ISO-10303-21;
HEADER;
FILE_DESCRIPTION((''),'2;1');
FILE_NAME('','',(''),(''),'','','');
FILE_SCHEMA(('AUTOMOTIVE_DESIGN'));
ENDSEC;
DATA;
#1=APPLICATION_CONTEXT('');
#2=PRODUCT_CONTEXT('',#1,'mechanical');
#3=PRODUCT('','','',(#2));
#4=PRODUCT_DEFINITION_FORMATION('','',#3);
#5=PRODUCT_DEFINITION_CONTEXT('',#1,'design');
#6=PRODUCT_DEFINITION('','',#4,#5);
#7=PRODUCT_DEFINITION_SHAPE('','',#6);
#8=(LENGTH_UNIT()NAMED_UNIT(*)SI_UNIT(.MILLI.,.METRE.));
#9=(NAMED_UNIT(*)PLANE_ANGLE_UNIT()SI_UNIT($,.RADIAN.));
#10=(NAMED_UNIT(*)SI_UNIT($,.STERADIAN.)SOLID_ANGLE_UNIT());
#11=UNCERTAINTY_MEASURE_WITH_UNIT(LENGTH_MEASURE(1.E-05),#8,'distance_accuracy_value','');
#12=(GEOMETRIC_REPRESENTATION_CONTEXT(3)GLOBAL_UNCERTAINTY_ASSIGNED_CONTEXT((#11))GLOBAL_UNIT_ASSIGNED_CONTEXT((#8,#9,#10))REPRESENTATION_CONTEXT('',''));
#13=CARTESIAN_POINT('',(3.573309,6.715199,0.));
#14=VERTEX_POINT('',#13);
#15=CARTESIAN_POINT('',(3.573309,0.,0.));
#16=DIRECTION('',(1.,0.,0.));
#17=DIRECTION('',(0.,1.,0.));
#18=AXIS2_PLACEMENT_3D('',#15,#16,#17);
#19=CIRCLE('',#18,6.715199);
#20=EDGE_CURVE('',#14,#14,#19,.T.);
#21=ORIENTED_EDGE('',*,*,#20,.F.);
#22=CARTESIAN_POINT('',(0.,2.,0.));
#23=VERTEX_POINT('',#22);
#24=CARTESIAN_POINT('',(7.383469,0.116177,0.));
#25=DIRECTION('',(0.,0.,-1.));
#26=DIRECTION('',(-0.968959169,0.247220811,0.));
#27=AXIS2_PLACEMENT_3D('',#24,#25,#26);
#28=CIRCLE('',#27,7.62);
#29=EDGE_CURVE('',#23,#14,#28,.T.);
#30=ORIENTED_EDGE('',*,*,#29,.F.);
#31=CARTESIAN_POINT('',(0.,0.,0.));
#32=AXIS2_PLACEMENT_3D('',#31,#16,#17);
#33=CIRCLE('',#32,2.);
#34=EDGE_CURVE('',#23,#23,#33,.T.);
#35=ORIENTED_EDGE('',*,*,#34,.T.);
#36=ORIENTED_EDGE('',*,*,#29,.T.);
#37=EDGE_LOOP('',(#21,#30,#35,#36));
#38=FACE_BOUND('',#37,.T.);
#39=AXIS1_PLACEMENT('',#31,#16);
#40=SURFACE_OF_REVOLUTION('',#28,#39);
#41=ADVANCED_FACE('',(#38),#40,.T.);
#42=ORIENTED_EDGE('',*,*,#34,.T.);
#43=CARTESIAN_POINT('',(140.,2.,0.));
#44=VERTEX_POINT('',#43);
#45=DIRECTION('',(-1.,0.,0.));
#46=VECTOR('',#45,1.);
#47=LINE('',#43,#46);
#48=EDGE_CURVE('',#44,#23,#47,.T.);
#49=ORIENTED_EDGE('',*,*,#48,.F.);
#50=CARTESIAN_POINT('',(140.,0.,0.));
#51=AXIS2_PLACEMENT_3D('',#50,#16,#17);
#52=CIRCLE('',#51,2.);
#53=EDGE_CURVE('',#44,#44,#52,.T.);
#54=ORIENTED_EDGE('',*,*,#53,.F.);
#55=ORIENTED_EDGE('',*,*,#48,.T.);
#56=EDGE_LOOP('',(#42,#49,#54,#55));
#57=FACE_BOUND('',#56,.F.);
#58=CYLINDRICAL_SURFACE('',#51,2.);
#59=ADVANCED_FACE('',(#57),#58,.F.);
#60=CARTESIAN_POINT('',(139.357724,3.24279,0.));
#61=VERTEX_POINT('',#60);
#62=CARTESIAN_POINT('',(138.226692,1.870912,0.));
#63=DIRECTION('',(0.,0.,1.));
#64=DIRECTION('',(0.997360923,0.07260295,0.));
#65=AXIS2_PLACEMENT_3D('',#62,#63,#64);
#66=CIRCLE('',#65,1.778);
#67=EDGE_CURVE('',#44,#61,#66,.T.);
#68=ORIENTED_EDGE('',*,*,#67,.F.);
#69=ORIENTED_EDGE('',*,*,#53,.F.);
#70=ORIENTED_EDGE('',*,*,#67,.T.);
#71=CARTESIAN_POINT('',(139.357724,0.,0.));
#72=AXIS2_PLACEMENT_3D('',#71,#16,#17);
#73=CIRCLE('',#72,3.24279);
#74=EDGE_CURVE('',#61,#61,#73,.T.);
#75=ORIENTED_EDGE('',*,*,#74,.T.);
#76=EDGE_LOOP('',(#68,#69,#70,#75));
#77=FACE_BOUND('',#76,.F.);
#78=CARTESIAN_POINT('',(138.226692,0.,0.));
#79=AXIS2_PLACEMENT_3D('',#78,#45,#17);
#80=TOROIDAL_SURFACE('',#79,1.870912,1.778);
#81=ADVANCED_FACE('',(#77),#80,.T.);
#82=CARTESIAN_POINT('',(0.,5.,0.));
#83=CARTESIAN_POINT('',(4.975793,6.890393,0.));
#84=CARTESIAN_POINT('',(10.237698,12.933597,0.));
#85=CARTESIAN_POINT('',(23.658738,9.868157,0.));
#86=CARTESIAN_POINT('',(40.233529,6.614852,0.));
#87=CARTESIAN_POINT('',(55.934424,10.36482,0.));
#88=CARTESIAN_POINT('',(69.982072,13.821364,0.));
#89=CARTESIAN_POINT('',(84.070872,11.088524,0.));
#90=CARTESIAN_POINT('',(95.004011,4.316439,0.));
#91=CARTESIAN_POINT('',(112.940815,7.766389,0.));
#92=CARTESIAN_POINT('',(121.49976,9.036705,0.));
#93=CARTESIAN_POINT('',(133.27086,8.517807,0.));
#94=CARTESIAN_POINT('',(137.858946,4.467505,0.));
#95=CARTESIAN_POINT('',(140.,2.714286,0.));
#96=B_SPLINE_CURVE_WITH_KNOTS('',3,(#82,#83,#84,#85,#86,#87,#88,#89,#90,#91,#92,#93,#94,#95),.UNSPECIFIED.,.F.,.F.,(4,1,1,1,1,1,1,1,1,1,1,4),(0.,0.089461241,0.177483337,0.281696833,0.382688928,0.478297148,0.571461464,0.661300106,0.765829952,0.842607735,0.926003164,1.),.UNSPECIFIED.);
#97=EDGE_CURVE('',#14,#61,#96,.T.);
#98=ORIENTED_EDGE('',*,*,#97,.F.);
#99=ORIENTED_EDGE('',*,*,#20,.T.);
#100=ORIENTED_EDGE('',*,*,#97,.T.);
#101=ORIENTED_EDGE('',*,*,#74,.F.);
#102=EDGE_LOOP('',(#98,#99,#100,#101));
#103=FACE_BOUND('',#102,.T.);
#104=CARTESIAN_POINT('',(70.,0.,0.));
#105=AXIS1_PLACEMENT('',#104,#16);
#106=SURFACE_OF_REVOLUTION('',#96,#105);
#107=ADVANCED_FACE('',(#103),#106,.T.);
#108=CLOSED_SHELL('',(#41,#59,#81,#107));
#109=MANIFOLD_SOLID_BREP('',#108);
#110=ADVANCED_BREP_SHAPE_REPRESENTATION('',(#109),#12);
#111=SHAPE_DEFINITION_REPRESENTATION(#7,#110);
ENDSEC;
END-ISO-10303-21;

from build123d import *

# Parameters (mm, degrees)
F2_R     = 2
F3_DEPTH = 140.0010001


# Not quite as in the source:
# - a fillet or chamfer that OpenCascade refuses, or shapes differently, is made with other operations: its cross-section is extruded or revolved along the edge and cut away or added


with BuildPart() as f1:
    # F0 (on Top) → F1 (revolve)
    with BuildSketch(Plane.XY):
        with BuildLine():
            Line((0, 5), (0, 0))
            Line((0, 0), (140, 0))
            Line((140, 0), (140, 2.7142855423))
            add(Edge.make_bspline(
                [(0, 5), (4.9757928307, 6.8903925487), (10.237697674, 12.9335968557), (23.6587376595, 9.8681565944), (40.2335290349, 6.6148517626), (55.9344236845, 10.3648201497), (69.9820716554, 13.8213637044), (84.0708721521, 11.08852401), (95.0040113038, 4.316439134), (112.9408147187, 7.7663893472), (121.4997603993, 9.0367049085), (133.2708596303, 8.51780716), (137.8589455035, 4.4675047231), (140, 2.7142855423)],
                knots=[0, 0, 0, 0, 0.0894612415, 0.1774833365, 0.281696833, 0.3826889283, 0.4782971476, 0.5714614637, 0.6613001063, 0.7658299525, 0.8426077345, 0.9260031641, 1, 1, 1, 1], degree=3))
        make_face()
    revolve(axis=Axis((70, 0, 0), (1, 0, 0)))

    # F2 (on face) → F3 (cut, through all)
    with BuildSketch(Plane.YZ.offset(140)):
        Circle(F2_R)
    extrude(amount=-F3_DEPTH, mode=Mode.SUBTRACT)

    # F4: fillet of radius 7.62 on 1 edges, made by hand

    # F4_s1 → F4_t2 (revolve, cut)
    with BuildSketch(Plane.XY):
        with BuildLine():
            ThreePointArc((0, 2), (1.3103638059, 4.7185458275), (3.573309158, 6.7151987902))
            Line((3.573309158, 6.7151987902), (3.4971059638, 6.8471792175))
            ThreePointArc((3.4971059638, 6.8471792175), (1.7554490429, 5.9222679087), (-0.0541249607, 5.1424649032))
            Line((-0.0541249607, 5.1424649032), (-0.1524, 5))
            ThreePointArc((-0.1524, 5), (-0.1524, 3.5), (-0.1476693773, 2.0376764515))
            Line((-0.1476693773, 2.0376764515), (0, 2))
        make_face()
    revolve(axis=Axis((0, 0, 0), (1, 0, 0)), mode=Mode.SUBTRACT)

    # F5: fillet of radius 1.778 on 1 edges, made by hand

    # F5_s1 → F5_t2 (revolve, cut)
    with BuildSketch(Plane.XY):
        with BuildLine():
            ThreePointArc((140, 2), (139.8062268067, 2.6872174566), (139.3577242723, 3.2427904579))
            Line((139.3577242723, 3.2427904579), (139.3803449121, 3.270228028))
            ThreePointArc((139.3803449121, 3.270228028), (139.7012472414, 3.0057217978), (140.0225290745, 2.7417983466))
            Line((140.0225290745, 2.7417983466), (140.03556, 2.7142855423))
            ThreePointArc((140.03556, 2.7142855423), (140.03556, 2.3571427711), (140.0354661544, 2.0025817609))
            Line((140.0354661544, 2.0025817609), (140, 2))
        make_face()
    revolve(axis=Axis((140, 0, 0), (1, 0, 0)), mode=Mode.SUBTRACT)


solid = f1.part
